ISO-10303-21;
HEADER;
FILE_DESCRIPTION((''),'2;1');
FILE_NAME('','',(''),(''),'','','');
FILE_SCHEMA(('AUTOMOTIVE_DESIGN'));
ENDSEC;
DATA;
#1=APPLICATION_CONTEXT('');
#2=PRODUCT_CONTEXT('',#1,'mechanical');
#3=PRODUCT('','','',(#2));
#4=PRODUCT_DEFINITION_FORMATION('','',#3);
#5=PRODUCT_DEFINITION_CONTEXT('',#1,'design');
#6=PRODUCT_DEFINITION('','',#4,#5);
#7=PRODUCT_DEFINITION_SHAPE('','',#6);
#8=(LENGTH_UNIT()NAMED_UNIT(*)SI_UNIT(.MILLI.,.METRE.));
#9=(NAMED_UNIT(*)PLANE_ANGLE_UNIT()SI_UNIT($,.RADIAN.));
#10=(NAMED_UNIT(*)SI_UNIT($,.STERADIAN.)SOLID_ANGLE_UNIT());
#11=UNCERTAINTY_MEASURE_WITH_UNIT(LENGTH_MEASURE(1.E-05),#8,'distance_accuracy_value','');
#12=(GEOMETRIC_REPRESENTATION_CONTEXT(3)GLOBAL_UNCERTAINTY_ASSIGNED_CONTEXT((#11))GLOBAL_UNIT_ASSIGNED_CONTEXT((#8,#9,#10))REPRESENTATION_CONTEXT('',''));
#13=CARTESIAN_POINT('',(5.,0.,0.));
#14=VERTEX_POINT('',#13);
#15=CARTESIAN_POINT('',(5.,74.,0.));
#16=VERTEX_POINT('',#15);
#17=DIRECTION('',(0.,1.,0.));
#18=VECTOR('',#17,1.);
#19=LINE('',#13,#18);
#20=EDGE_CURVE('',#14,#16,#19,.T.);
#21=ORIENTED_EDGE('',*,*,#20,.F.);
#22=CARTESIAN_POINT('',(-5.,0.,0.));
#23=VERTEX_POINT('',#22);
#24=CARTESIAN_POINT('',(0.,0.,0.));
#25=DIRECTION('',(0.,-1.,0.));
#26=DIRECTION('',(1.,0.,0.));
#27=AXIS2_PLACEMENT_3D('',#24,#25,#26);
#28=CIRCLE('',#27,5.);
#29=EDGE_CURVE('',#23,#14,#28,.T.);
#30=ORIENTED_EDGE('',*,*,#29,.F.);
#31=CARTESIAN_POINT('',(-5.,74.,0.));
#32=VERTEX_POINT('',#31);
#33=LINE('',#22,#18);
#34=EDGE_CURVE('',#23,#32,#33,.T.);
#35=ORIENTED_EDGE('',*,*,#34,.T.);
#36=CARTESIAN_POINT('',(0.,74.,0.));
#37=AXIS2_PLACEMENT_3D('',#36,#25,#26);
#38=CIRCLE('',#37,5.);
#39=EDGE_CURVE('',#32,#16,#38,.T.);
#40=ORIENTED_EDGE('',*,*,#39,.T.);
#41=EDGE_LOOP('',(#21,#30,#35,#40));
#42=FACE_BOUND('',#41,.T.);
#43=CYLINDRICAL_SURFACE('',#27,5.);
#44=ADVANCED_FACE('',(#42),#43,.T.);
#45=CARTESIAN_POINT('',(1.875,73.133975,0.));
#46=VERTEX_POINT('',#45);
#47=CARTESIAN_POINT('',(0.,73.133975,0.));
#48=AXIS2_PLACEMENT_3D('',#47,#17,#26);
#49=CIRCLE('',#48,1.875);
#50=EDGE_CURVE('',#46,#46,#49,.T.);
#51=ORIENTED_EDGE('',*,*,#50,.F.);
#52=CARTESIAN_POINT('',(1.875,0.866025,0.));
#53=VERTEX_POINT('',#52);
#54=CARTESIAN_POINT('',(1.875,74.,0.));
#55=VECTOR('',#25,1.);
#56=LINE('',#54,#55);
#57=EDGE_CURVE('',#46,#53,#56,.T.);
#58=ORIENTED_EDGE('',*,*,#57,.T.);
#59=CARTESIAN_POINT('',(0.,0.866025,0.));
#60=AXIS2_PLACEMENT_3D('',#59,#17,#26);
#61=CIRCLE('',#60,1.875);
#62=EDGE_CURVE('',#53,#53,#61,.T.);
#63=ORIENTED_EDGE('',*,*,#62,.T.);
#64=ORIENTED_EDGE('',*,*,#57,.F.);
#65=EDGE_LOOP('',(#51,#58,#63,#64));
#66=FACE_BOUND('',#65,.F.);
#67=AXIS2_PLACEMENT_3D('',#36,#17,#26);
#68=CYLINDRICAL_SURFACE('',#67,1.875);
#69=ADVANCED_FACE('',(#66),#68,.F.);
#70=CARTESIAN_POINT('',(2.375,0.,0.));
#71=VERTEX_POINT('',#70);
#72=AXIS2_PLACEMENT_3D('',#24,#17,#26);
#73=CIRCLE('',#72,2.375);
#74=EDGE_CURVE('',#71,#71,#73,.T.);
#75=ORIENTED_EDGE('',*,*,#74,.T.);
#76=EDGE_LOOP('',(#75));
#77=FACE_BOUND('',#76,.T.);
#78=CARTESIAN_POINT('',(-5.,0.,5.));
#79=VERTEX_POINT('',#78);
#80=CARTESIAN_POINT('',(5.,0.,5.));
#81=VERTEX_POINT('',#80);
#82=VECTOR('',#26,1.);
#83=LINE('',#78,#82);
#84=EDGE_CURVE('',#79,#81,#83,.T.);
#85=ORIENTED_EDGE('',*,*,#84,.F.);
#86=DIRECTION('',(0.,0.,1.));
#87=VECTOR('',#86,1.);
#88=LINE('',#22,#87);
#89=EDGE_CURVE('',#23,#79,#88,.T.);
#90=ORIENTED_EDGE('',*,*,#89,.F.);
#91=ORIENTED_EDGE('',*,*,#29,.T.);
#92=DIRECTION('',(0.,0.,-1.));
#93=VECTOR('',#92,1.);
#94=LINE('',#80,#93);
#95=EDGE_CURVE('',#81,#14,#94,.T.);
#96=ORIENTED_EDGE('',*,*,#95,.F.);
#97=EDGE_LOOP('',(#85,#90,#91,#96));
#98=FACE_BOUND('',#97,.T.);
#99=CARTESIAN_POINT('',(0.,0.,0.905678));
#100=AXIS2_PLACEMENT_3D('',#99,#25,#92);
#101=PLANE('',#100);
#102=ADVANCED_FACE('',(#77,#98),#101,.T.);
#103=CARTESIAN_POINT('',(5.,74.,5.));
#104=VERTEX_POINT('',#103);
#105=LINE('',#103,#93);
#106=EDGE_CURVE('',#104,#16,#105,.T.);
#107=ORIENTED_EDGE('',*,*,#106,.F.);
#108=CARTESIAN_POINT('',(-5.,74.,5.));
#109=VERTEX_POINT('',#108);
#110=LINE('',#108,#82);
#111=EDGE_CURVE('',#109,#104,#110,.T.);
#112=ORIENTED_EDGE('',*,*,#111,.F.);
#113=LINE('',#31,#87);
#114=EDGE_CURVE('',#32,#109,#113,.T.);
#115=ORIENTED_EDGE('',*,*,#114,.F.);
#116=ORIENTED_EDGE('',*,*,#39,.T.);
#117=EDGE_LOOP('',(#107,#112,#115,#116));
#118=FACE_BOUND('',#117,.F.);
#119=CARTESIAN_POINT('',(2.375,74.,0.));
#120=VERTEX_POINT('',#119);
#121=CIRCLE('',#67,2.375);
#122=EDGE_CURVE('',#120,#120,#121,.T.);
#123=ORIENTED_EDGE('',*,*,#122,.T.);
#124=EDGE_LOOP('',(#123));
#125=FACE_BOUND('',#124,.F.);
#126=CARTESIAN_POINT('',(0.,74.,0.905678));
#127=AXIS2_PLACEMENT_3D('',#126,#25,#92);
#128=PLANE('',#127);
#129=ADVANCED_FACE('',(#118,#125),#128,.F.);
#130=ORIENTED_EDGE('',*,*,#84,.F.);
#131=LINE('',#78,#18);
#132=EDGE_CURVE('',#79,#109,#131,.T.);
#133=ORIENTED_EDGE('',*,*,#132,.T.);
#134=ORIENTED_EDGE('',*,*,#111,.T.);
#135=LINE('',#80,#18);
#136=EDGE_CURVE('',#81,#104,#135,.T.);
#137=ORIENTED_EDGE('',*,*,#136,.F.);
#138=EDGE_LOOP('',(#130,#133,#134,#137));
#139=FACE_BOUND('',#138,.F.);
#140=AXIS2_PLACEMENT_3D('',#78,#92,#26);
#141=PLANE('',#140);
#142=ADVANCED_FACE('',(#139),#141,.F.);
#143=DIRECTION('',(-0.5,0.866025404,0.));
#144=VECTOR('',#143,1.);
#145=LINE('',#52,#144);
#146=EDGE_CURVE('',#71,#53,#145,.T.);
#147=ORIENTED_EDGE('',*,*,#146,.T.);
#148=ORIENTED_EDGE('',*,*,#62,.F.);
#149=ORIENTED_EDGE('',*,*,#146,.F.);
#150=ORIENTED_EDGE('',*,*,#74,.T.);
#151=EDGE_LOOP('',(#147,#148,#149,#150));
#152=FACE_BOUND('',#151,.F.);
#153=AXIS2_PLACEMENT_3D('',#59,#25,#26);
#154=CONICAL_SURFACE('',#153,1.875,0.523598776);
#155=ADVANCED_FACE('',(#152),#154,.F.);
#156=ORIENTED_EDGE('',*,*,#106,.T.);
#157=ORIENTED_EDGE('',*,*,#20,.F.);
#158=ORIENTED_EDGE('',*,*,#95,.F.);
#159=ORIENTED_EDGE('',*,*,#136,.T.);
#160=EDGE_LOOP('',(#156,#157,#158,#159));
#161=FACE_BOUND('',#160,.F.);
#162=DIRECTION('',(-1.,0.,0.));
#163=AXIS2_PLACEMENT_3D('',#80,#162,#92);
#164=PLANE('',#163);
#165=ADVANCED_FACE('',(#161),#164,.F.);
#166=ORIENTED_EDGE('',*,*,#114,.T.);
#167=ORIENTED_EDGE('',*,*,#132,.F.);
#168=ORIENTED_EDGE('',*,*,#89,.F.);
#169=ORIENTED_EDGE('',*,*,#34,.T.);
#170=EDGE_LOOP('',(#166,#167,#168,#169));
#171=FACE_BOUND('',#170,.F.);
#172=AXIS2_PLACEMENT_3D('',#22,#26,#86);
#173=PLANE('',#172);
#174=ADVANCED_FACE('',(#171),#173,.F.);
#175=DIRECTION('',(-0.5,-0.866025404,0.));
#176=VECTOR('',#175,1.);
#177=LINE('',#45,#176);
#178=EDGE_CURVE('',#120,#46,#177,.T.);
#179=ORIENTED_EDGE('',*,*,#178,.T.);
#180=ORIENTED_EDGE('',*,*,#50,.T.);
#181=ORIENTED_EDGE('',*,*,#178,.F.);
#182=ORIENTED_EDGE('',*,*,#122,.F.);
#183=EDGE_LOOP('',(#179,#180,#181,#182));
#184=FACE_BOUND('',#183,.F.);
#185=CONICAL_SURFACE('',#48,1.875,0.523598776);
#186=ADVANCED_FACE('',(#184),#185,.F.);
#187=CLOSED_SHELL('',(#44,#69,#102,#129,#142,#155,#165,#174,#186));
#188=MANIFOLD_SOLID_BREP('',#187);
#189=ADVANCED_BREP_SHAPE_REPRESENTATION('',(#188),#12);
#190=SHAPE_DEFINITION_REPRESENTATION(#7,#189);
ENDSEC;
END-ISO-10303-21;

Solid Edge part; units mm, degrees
sketch "Sketch1" plane through (0, 0, 0) normal (0, -1, 0) x (1, 0, 0)
  arc A0 (-5, 0) -> (5, 0) centre (0, 0) ccw
  line L0 (5, 5) -> (5, 0)
  line L1 (-5, 5) -> (5, 5)
  line L2 (-5, 0) -> (-5, 5)
  dimension "D1" = 5
  dimension "D2" = 5
extrude "Extrusionsausprägung_2" add sketch "Sketch1" against normal blind 74
sketch "Sketch2" plane through (0, 74, 0) normal (0, 1, 0) x (1, 0, 0)
  circle A0 centre (0, 0) radius 1.875
  dimension "D1" = 3.75
extrude "Cutout1" cut sketch "Sketch2" against normal up to next
chamfer "Fase_1" distance 0.5 angle 60 2 edges at (-1.875, 74, 0) (0, 0, 1.875) measured on face at (-3.2333, 0, 3.4333) measured on face at (-3.2333, 74, 3.4333)
properties part number "A2.2" material "Nylon, allgemein"
